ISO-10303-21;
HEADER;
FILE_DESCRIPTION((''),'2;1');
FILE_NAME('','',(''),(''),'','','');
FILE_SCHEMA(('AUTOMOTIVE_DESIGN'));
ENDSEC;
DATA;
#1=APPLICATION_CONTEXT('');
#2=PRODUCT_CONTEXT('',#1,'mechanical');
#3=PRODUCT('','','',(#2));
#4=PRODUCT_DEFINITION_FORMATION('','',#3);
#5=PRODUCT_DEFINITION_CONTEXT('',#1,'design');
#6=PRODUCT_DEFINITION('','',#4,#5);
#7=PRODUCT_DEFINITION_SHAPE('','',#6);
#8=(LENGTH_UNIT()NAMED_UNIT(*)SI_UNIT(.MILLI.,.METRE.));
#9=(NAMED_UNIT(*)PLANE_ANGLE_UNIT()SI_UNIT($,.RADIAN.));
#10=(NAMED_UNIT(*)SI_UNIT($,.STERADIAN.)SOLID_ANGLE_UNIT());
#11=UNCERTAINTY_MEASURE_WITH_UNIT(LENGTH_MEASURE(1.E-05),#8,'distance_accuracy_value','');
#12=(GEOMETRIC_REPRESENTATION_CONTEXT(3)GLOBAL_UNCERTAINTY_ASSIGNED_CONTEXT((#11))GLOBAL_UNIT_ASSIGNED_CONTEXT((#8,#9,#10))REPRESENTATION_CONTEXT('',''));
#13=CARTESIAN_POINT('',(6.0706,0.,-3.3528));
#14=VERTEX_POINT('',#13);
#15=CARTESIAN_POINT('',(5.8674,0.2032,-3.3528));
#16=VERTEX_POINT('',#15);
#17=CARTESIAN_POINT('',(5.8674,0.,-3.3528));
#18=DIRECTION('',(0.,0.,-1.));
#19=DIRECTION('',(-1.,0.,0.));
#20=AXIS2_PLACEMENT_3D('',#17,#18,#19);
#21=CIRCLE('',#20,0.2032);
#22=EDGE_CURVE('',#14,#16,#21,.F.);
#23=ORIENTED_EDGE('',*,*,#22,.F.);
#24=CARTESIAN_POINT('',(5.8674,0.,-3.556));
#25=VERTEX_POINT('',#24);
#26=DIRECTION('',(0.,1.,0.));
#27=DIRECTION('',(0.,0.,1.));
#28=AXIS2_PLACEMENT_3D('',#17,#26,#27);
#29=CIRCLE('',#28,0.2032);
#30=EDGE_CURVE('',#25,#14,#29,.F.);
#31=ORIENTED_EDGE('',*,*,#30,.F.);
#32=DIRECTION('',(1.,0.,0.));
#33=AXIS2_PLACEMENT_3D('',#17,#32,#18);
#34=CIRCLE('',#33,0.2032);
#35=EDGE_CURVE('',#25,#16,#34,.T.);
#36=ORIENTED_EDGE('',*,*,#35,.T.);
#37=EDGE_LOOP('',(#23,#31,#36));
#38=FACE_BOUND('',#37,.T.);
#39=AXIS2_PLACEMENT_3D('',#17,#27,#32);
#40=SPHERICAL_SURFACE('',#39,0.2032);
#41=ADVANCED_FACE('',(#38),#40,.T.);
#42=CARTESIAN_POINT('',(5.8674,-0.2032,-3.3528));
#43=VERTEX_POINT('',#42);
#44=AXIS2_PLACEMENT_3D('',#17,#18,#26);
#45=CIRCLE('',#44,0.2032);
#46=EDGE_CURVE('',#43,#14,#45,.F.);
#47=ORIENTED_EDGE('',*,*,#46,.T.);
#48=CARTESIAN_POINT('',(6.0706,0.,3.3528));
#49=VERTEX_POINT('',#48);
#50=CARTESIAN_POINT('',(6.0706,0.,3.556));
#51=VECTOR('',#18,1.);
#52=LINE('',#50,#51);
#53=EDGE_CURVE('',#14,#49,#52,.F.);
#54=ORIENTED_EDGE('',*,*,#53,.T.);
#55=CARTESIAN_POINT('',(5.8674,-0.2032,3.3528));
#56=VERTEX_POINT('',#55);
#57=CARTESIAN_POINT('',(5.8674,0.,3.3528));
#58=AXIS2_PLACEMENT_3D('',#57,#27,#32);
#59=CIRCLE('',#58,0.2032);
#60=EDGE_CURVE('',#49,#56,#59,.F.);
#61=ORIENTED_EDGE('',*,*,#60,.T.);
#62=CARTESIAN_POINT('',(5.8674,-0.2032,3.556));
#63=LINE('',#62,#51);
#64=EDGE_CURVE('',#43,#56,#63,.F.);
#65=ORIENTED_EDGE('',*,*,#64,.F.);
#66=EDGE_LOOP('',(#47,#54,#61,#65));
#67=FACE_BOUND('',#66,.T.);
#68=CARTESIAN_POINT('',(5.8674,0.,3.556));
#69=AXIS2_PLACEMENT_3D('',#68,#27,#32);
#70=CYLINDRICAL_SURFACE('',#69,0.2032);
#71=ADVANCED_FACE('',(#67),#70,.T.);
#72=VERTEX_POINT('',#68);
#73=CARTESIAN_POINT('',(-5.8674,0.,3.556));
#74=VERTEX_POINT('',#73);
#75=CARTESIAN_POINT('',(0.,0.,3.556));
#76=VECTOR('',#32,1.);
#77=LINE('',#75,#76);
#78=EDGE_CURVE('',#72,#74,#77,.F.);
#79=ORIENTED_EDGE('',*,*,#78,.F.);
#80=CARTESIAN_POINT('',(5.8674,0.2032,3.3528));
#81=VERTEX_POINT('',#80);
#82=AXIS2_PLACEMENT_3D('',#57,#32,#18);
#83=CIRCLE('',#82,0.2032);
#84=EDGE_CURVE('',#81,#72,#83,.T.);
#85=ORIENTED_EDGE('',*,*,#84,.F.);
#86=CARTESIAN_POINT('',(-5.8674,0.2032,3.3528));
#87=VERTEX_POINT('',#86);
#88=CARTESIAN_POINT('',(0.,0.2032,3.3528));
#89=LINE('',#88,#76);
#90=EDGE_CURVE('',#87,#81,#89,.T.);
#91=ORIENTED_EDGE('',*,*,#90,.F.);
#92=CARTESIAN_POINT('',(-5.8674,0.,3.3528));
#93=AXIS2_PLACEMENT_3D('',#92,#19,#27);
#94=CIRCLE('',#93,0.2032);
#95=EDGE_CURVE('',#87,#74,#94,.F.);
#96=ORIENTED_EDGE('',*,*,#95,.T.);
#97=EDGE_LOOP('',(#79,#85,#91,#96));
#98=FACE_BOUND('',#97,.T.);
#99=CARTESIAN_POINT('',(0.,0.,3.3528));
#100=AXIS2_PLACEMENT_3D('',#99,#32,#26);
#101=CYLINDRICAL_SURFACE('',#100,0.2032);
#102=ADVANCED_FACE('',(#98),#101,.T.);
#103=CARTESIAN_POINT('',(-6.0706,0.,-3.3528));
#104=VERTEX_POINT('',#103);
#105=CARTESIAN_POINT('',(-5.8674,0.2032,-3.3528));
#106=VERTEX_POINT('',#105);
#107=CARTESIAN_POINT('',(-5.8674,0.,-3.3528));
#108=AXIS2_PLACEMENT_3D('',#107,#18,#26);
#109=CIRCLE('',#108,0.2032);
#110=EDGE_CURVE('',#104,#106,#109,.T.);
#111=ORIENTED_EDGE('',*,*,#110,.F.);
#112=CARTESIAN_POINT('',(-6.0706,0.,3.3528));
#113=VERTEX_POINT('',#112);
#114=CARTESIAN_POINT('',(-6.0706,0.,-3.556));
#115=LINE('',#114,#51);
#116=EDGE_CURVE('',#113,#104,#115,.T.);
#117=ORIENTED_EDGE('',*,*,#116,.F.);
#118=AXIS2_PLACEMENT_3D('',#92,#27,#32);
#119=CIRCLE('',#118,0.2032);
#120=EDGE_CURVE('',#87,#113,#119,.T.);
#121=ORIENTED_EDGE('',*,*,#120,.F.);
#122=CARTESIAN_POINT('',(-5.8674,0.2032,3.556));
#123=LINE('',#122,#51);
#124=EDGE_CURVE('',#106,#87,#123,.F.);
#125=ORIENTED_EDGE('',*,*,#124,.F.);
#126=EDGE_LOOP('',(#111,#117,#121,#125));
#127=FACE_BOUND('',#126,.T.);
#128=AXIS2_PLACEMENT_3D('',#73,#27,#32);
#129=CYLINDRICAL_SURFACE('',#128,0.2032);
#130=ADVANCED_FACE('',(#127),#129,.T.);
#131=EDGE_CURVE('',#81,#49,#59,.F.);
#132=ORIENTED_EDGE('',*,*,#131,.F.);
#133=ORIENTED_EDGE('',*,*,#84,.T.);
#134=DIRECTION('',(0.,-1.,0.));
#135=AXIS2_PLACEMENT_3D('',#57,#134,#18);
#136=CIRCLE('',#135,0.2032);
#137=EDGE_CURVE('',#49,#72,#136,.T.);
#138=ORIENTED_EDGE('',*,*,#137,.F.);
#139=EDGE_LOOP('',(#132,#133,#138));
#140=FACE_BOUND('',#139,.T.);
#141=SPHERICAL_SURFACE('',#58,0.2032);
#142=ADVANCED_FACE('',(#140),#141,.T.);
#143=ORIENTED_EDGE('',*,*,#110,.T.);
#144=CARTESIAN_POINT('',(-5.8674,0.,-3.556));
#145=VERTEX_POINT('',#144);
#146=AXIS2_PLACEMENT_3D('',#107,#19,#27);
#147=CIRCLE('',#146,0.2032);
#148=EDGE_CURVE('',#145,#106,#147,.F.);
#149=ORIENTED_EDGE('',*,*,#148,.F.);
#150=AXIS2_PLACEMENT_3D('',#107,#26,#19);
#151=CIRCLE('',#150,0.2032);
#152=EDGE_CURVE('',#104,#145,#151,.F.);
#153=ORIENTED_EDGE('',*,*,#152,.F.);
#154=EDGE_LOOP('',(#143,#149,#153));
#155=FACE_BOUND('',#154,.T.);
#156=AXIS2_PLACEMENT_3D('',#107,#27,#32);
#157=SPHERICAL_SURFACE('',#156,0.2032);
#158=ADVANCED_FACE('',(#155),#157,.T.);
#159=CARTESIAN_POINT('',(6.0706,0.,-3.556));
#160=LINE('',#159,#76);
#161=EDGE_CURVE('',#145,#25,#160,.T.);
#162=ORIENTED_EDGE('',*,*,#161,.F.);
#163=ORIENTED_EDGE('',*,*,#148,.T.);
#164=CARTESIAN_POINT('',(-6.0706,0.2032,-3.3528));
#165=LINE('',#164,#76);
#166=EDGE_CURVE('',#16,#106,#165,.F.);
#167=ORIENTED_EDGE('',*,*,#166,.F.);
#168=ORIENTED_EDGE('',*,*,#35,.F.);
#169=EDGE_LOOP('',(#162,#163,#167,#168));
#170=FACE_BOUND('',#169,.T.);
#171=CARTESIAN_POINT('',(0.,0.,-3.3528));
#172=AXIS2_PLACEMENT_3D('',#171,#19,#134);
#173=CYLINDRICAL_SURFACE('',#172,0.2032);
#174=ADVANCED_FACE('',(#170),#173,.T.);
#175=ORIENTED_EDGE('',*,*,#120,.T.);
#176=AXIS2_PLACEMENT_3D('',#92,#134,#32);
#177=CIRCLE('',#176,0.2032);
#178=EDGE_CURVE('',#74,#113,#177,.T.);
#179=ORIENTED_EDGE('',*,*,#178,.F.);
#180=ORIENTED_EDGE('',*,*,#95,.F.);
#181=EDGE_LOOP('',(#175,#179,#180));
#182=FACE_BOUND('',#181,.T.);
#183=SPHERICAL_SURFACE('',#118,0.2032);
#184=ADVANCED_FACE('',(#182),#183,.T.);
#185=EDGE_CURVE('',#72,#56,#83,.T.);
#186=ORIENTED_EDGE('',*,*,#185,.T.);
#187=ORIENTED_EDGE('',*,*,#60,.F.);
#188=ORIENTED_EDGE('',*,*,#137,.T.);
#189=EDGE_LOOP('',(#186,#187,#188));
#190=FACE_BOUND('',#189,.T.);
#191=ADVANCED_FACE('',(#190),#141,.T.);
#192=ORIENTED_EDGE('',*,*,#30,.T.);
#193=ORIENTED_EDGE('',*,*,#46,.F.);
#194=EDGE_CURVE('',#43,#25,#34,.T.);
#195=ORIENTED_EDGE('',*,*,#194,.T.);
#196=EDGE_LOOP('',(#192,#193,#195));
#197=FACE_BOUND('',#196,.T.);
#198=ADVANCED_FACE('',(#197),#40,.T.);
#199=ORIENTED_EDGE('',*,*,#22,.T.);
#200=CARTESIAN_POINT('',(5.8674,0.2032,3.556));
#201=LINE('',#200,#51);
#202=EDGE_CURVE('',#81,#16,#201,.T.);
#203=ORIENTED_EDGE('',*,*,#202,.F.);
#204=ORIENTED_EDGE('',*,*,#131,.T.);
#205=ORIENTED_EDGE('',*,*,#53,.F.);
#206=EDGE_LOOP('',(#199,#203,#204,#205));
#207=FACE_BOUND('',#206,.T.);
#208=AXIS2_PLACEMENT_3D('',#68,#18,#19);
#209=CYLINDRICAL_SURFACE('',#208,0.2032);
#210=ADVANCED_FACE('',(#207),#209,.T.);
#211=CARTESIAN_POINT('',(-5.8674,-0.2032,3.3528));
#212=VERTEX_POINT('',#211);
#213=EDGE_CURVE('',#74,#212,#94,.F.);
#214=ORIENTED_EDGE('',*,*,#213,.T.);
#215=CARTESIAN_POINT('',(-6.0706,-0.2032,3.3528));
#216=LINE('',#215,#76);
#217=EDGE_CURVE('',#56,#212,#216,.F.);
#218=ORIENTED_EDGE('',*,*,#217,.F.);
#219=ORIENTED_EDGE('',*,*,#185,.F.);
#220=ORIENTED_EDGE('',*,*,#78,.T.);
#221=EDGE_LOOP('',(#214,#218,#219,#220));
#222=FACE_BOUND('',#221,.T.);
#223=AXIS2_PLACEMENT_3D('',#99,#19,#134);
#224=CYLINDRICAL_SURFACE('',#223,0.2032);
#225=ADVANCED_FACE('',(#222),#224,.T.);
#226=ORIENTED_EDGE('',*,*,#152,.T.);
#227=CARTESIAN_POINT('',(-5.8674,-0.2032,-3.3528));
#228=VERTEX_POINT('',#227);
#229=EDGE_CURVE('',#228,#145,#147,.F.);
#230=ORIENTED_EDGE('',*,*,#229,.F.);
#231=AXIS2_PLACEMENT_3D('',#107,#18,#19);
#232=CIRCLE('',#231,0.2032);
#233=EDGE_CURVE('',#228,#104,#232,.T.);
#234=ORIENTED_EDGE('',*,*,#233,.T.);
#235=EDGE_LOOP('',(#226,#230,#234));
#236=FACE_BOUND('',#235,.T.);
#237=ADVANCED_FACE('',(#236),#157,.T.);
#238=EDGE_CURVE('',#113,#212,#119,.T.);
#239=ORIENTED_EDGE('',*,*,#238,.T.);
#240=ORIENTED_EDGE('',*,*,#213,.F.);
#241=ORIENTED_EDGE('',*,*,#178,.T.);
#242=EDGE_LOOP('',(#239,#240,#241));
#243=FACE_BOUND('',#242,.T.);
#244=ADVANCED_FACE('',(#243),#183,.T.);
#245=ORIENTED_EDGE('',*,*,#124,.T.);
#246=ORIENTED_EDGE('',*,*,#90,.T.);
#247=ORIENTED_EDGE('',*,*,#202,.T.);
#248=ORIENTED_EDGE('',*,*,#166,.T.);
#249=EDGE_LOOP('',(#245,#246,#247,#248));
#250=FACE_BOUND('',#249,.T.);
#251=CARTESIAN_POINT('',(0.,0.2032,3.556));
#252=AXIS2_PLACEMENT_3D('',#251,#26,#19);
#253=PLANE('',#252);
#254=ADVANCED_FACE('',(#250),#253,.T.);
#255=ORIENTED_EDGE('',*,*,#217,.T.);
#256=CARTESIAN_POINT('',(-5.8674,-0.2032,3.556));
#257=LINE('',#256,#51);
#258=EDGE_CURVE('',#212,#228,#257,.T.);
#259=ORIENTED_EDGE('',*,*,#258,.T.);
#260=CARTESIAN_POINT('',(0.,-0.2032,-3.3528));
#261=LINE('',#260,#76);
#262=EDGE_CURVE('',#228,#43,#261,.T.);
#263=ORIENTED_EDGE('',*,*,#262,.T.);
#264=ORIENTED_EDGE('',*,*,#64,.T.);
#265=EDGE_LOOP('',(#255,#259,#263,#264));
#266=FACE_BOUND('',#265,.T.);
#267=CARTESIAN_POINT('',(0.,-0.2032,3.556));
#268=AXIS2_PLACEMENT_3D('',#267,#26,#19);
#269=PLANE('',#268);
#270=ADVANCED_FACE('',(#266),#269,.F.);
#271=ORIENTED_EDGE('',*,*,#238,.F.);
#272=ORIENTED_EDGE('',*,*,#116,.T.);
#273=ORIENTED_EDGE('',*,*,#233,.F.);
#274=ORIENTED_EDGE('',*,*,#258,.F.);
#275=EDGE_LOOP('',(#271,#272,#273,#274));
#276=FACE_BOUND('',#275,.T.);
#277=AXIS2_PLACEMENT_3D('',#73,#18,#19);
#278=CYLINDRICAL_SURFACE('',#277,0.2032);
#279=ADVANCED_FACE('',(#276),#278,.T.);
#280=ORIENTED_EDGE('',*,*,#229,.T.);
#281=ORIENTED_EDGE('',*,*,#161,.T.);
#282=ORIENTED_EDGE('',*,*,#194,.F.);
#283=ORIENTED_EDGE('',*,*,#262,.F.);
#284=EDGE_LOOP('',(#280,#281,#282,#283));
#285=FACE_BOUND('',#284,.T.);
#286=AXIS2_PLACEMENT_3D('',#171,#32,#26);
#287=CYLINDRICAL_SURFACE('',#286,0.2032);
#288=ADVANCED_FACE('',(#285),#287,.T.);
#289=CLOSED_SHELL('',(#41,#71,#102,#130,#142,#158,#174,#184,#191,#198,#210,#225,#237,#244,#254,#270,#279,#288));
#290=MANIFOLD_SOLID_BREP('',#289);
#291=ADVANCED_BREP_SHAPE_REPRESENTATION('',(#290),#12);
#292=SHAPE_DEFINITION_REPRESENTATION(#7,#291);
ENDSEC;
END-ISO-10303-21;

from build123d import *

# Parameters (mm, degrees)
BOSS_EXTRUDE1_DEPTH = 3.556
FILLET3_R           = 0.2032


with BuildPart() as part:
    # Sketch1 → Boss-Extrude1 (new, symmetric)
    with BuildSketch(Plane.XY):
        Polygon((6.0706, 0.2032), (-6.0706, 0.2032), (-6.0706, -0.2032), (5.6642, -0.2032), (6.0706, -0.2032), align=None)
    extrude(amount=BOSS_EXTRUDE1_DEPTH, both=True)

    # Fillet3
    fillet3_edges = [part.edges().sort_by_distance(p)[0] for p in [
        (-6.0706, 0, 3.556),
        (0, -0.2032, 3.556),
        (6.0706, 0, 3.556),
        (0, -0.2032, -3.556),
        (-6.0706, 0, -3.556),
        (0, 0.2032, -3.556),
        (6.0706, 0, -3.556),
        (6.0706, -0.2032, 0),
        (-6.0706, -0.2032, 0),
        (0, 0.2032, 3.556),
        (-6.0706, 0.2032, 0),
        (6.0706, 0.2032, 0),
    ]]
    fillet(fillet3_edges, radius=FILLET3_R - 0.0001)  # a hair under: the kernel refuses the full size


solid = part.part
